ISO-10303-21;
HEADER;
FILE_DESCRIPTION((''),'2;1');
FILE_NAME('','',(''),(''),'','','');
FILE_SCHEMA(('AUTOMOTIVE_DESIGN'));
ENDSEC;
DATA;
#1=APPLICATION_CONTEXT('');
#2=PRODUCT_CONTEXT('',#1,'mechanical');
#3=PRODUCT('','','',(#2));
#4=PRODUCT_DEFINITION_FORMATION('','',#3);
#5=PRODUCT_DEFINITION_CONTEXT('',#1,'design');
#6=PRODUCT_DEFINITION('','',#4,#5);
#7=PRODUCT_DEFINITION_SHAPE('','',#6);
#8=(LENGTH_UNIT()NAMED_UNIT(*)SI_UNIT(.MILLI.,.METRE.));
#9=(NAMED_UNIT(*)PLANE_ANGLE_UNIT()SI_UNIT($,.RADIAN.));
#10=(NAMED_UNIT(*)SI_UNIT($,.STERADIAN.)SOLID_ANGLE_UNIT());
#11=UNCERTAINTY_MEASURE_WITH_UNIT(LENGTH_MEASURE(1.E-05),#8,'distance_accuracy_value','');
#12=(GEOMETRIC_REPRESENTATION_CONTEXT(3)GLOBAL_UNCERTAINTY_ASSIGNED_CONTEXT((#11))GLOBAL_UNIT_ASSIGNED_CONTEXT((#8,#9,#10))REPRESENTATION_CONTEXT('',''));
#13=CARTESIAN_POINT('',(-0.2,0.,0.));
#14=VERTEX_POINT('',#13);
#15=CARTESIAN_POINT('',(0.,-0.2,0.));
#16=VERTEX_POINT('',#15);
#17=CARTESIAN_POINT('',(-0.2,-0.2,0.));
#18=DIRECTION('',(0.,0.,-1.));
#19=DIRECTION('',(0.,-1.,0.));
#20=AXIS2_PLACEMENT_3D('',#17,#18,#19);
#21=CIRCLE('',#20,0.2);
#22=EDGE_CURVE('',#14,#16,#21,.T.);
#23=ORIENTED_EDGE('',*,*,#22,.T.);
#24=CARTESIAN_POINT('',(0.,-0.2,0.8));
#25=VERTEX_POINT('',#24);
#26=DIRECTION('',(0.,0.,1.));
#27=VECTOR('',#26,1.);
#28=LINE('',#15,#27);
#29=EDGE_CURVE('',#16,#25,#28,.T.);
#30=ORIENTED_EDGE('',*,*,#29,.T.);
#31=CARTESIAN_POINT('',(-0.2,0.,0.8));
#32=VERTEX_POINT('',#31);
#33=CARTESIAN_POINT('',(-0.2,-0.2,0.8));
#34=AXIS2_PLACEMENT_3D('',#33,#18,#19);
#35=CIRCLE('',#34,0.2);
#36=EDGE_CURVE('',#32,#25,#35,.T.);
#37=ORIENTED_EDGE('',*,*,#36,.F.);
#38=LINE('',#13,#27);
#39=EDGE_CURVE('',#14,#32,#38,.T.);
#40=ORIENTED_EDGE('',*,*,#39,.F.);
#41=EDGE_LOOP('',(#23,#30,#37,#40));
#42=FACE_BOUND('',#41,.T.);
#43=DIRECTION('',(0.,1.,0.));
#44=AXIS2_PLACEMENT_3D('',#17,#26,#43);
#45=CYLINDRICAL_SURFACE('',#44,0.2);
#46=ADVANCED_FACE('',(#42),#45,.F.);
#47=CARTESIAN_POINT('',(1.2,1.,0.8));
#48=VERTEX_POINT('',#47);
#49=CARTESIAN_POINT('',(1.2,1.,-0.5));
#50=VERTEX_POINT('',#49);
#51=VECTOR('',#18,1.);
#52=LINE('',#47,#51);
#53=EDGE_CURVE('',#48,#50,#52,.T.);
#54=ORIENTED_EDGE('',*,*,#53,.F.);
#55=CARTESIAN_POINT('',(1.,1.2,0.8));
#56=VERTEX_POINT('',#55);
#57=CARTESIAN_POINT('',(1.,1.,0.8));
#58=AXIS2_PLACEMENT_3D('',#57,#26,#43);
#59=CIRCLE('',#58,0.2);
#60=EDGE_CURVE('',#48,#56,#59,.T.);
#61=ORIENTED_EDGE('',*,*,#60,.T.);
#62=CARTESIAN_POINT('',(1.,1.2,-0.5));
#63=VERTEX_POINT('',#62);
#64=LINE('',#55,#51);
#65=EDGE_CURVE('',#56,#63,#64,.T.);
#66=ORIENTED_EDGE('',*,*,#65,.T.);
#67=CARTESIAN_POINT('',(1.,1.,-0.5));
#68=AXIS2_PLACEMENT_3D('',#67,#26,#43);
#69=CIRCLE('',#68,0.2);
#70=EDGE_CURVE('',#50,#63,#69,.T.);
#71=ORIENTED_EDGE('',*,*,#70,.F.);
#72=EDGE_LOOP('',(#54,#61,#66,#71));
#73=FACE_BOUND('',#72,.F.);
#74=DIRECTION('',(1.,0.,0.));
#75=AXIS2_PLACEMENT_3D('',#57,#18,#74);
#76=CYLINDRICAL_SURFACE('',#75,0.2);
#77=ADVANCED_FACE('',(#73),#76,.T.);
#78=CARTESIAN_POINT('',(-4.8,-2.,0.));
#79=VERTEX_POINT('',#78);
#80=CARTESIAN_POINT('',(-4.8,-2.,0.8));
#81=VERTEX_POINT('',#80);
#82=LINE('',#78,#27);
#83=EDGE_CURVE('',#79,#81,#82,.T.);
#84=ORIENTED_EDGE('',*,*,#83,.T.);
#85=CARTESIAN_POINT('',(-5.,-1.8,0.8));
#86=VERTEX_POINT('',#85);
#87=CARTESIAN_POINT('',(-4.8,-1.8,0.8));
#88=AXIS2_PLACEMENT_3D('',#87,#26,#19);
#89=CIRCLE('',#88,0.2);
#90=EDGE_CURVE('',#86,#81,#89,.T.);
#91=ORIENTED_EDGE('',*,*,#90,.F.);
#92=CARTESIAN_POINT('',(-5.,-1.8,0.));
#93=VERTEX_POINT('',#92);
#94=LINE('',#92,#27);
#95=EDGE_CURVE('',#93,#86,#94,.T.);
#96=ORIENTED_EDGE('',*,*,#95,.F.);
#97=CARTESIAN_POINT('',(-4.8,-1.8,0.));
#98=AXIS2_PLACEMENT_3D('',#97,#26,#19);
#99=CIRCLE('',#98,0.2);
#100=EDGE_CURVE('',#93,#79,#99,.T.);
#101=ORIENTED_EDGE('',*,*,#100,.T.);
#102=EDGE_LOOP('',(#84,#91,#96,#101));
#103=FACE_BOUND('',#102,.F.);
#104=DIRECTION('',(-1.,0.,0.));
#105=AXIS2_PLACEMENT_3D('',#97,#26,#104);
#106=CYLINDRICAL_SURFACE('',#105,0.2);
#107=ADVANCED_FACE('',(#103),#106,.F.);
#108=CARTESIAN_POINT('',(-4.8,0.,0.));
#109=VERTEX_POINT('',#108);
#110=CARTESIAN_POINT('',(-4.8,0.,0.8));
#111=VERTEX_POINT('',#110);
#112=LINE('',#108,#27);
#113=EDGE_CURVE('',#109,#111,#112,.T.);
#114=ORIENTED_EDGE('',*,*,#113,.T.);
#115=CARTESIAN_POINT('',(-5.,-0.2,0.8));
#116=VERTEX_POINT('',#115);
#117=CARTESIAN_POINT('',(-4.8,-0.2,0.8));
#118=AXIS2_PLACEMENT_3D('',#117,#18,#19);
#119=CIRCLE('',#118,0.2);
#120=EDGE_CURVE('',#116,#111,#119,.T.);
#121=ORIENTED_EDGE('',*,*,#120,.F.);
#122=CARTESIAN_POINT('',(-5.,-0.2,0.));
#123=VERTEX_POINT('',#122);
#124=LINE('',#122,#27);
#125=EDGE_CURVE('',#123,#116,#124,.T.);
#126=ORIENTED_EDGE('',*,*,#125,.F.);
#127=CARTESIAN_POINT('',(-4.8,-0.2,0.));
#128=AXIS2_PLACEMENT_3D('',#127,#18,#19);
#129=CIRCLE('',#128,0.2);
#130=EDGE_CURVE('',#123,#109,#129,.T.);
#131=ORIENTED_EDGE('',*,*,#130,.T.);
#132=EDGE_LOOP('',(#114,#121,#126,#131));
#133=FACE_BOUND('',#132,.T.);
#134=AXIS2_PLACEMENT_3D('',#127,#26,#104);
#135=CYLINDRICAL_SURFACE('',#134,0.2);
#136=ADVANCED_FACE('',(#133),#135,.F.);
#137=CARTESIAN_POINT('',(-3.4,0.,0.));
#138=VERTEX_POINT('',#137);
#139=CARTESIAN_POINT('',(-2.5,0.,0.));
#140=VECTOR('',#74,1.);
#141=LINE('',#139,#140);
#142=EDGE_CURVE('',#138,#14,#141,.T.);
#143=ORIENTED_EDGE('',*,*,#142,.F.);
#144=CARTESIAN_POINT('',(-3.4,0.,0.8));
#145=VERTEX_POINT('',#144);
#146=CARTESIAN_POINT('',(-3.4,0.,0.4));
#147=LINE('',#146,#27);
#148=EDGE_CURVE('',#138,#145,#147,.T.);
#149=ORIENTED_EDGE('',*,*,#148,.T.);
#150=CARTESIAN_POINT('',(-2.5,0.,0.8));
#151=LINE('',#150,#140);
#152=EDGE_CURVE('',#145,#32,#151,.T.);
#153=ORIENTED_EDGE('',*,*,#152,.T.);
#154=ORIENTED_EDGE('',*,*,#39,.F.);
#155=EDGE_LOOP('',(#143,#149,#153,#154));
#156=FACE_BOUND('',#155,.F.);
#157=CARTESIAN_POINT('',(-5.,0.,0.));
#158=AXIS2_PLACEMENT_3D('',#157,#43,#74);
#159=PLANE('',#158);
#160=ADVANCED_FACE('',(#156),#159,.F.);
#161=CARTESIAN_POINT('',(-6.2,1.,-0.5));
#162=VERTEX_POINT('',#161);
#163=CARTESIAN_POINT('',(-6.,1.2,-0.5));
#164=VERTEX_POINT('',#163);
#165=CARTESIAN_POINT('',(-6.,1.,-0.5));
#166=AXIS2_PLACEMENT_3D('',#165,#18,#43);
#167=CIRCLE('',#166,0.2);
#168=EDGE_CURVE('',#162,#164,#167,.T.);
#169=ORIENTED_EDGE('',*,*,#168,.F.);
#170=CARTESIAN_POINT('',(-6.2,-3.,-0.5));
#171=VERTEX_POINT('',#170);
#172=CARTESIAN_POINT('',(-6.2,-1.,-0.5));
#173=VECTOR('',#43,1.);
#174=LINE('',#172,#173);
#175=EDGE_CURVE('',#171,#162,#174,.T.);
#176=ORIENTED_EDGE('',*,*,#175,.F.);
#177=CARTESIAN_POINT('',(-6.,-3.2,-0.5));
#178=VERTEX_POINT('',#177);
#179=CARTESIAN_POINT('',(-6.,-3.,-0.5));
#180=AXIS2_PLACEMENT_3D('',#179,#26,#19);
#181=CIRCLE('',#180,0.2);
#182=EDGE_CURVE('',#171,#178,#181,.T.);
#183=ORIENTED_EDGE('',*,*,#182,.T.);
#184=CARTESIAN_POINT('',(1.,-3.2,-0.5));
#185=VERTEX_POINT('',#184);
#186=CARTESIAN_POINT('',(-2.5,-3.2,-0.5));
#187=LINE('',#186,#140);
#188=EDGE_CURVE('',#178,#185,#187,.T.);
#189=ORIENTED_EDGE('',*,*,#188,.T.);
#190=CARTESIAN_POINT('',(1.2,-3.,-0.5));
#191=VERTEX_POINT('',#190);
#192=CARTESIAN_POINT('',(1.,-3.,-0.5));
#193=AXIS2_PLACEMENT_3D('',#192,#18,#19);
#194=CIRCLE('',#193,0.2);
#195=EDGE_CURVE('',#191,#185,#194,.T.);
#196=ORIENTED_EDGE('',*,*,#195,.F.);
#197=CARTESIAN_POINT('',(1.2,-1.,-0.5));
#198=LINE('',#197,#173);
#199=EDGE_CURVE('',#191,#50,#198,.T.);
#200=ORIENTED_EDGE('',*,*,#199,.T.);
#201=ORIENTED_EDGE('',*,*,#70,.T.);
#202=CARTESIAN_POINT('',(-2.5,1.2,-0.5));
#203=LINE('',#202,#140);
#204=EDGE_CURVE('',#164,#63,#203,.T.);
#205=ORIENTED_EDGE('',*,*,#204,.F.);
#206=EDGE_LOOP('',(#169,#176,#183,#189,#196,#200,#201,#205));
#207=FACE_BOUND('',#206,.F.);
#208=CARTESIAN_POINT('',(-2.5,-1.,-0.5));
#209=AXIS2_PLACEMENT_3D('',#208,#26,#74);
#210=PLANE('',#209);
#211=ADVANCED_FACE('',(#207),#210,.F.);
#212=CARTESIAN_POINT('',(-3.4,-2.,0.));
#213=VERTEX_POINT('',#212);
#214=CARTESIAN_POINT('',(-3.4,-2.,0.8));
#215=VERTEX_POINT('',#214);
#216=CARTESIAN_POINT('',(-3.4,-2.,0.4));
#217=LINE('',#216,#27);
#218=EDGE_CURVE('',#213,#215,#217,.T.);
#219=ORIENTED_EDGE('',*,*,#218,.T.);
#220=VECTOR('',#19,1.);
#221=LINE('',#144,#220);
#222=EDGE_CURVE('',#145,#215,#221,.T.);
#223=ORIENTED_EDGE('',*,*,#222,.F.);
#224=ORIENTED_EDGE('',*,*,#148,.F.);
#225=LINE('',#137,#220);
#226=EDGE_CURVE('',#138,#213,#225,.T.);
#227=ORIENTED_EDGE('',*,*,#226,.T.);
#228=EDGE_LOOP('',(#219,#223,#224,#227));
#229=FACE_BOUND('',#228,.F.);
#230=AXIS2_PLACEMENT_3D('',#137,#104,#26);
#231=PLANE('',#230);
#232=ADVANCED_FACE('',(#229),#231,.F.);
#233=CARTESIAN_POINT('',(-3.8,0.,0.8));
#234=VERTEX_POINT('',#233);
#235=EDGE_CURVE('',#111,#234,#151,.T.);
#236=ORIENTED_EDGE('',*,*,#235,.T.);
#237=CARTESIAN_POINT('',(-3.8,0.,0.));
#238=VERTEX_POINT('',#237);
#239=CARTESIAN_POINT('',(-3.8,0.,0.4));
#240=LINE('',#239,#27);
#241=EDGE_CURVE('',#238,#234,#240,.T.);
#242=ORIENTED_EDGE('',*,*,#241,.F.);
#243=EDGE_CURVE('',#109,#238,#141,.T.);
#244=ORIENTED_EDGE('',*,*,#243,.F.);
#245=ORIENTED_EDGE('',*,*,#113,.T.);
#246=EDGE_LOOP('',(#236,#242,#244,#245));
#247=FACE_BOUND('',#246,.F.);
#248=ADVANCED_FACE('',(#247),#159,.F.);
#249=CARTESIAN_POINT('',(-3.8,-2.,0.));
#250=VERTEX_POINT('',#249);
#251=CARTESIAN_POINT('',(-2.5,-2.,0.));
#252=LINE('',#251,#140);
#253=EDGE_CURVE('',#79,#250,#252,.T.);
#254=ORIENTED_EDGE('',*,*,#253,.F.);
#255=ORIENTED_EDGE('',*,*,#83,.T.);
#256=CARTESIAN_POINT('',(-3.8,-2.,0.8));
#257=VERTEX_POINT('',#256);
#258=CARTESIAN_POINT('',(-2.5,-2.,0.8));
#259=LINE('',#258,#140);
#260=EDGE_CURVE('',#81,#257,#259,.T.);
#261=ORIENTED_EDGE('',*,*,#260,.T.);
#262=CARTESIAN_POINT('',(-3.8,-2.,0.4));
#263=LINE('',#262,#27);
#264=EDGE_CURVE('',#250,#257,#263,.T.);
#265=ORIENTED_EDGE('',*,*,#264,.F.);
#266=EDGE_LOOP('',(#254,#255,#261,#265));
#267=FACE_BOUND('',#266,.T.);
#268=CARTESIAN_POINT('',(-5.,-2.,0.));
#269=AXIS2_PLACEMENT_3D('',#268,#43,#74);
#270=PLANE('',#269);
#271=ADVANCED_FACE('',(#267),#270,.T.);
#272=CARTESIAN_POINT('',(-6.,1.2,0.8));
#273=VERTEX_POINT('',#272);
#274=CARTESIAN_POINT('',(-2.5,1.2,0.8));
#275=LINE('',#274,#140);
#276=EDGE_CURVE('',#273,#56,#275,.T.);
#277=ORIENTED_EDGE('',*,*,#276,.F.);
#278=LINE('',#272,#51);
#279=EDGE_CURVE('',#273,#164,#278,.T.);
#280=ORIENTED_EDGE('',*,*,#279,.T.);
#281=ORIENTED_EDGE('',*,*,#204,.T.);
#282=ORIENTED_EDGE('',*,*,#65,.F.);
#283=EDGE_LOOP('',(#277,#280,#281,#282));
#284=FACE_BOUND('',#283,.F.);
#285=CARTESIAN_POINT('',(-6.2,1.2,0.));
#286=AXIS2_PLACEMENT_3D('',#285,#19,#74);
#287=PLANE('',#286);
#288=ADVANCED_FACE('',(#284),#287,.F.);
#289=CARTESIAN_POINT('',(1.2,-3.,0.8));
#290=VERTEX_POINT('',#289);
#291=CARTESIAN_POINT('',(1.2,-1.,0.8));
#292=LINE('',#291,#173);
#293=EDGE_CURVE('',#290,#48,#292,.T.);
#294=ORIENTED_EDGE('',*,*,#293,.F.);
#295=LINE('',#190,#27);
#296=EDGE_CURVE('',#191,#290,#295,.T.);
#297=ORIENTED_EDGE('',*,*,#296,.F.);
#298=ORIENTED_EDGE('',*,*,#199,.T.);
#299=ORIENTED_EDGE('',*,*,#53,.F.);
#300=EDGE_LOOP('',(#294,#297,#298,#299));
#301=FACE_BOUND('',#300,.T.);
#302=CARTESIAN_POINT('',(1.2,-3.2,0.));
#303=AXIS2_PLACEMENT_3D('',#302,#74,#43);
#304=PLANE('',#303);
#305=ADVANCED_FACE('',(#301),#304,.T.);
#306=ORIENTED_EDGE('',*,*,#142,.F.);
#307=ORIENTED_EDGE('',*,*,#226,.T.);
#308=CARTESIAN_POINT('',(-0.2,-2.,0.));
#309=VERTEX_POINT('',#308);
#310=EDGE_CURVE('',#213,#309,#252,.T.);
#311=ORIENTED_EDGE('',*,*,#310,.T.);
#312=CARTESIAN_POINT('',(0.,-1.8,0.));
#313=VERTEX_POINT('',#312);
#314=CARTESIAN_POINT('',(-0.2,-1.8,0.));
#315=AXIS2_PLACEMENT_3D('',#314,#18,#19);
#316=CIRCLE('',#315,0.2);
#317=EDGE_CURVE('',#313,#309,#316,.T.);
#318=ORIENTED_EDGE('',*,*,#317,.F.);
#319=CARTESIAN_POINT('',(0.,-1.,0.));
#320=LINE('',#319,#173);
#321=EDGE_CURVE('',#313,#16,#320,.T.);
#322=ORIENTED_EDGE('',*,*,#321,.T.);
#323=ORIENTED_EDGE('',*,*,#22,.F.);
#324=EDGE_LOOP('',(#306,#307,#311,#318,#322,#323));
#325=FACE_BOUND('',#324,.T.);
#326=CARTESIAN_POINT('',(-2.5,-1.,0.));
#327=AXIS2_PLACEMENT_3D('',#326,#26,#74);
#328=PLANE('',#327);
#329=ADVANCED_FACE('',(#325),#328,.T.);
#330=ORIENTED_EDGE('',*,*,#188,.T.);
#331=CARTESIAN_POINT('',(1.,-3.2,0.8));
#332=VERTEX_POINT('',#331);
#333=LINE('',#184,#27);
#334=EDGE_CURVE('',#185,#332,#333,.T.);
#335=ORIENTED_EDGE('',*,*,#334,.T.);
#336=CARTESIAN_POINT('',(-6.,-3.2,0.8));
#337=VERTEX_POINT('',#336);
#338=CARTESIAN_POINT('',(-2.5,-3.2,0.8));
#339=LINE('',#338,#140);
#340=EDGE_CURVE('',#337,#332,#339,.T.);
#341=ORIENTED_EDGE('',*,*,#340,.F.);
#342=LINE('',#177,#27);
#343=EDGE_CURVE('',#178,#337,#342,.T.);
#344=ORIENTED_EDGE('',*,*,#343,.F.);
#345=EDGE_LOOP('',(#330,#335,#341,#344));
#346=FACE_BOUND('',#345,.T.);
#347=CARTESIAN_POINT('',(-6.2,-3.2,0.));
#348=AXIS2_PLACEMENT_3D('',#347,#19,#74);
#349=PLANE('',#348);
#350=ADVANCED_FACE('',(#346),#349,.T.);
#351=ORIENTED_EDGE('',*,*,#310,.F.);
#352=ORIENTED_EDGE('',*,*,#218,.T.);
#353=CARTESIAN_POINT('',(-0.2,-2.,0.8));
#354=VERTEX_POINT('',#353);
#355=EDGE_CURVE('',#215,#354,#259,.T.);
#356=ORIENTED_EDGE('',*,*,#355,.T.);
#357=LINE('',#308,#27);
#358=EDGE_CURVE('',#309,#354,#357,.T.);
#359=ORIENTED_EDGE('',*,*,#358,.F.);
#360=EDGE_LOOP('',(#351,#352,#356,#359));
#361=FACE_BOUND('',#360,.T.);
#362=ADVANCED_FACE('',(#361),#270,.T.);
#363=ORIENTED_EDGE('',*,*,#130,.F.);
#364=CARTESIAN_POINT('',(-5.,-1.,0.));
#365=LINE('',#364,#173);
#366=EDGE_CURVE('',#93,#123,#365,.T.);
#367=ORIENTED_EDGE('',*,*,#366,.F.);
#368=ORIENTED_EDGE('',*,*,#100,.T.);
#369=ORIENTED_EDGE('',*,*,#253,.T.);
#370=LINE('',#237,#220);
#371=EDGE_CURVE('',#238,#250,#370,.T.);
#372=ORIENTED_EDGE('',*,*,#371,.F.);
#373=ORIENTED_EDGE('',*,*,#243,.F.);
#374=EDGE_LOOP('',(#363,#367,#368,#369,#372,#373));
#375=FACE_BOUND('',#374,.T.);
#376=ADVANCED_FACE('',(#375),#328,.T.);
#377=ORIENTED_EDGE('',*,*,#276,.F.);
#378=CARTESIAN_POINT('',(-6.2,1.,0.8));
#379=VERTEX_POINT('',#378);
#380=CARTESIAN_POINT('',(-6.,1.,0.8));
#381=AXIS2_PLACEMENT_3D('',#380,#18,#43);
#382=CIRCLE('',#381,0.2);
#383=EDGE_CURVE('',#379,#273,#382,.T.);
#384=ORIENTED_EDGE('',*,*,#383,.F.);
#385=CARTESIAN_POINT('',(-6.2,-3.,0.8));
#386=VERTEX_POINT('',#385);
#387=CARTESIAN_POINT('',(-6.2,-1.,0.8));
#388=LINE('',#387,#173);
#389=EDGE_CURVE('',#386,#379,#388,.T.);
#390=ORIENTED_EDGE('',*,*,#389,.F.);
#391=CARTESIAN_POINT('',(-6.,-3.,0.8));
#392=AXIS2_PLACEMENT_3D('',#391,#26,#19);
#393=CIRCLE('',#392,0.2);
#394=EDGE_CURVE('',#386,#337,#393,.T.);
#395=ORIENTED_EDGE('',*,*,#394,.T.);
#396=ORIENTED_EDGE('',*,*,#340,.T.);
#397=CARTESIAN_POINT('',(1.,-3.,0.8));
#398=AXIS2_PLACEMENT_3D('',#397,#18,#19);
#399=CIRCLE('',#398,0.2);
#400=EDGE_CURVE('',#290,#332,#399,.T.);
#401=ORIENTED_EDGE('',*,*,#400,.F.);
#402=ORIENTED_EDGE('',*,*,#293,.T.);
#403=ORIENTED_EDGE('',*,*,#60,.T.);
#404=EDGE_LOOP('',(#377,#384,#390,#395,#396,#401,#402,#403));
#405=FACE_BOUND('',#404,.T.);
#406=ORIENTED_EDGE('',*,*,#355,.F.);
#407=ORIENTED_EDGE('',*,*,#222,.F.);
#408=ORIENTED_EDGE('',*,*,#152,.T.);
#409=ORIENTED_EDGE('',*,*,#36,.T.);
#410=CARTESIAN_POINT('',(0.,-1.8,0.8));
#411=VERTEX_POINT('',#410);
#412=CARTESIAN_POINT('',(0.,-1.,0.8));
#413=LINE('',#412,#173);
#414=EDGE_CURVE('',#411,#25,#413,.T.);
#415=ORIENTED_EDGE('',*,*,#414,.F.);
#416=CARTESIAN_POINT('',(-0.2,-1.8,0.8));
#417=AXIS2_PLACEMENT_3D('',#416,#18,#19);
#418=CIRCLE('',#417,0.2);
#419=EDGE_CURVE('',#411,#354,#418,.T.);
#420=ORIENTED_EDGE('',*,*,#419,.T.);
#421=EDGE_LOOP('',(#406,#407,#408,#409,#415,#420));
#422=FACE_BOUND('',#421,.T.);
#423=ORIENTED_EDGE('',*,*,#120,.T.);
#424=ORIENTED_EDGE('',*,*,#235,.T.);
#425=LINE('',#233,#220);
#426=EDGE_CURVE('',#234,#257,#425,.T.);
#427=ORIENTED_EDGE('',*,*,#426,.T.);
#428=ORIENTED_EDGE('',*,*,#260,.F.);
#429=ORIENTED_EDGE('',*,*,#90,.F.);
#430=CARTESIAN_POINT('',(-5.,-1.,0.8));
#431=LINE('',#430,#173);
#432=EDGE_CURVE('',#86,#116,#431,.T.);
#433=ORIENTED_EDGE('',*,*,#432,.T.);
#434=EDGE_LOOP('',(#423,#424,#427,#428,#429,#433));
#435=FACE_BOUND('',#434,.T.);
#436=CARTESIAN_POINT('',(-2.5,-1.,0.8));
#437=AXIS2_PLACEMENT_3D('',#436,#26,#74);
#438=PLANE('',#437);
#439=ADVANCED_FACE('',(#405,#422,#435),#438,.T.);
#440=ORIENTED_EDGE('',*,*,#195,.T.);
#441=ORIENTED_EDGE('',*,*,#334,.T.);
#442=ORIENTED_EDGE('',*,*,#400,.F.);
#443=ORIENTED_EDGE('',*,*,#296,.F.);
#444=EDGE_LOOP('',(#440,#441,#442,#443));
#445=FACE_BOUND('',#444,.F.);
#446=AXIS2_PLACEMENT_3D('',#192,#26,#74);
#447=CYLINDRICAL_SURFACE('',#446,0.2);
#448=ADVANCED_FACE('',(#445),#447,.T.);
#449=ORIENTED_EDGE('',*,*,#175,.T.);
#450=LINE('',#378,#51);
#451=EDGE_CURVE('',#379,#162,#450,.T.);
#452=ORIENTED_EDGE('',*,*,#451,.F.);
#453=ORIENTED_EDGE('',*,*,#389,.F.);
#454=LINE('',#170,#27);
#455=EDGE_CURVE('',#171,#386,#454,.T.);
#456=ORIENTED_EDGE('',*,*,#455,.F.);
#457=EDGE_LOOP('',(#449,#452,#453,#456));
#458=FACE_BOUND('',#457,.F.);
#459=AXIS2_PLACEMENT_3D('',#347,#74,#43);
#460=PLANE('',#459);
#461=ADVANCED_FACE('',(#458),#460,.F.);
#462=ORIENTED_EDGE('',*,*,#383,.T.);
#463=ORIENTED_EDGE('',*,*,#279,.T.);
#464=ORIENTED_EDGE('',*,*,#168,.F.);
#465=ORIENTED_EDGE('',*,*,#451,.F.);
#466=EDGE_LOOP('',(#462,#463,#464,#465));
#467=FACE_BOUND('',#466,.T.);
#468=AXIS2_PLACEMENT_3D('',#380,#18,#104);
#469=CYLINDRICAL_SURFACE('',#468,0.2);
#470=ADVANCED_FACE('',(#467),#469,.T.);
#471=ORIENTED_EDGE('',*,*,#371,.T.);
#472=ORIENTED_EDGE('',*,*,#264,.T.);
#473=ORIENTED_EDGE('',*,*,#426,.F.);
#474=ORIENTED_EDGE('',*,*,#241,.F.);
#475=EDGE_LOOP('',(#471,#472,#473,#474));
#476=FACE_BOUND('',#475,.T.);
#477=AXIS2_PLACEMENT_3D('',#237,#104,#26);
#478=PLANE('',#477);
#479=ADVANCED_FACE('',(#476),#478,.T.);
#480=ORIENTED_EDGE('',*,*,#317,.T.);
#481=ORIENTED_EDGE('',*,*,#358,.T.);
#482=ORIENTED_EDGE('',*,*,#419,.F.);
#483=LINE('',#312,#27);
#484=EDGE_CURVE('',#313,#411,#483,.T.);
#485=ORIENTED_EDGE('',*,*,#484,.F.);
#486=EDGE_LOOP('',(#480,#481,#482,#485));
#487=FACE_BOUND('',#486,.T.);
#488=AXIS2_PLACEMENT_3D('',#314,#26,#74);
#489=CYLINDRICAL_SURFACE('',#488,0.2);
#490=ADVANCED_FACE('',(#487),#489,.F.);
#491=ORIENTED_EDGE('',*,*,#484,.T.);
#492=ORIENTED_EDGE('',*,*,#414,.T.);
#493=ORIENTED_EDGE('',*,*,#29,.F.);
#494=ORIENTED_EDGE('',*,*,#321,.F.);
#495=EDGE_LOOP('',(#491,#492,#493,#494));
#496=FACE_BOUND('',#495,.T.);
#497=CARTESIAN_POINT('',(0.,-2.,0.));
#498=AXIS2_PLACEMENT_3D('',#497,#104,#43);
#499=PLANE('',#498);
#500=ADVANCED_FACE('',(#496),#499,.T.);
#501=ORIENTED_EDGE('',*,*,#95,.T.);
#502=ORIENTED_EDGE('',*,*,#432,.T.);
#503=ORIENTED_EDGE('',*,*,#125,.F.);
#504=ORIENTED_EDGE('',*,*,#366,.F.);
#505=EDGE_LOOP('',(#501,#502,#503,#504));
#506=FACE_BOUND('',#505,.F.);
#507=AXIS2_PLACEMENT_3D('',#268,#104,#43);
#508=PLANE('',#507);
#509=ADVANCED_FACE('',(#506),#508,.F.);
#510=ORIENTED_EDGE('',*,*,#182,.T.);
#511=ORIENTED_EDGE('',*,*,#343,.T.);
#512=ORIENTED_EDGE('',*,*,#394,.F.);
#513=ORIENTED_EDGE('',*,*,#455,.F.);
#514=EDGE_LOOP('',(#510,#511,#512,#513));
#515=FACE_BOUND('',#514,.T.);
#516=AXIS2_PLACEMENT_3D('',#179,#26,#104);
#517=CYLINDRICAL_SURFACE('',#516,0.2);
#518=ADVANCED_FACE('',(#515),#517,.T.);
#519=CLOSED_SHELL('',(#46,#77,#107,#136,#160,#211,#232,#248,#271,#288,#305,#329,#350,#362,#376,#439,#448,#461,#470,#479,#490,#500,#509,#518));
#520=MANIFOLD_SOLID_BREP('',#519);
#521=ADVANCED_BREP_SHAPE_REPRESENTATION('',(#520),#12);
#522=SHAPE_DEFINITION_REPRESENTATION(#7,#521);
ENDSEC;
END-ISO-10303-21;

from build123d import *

# Parameters (mm, degrees)
F0_W     = 7.400000114
F0_H     = 4.400000114
F0_W_2   = 5
F0_H_2   = 2
F1_DEPTH = 0.8
F2_DEPTH = 0.5
F4_R     = 0.2
F5_W     = 0.4
F5_H     = 0.8
F6_DEPTH = 2


# Not quite as in the source:
# - a feature names something its author has since deleted; it is built from what else it names


with BuildPart() as f1:
    # F0 (on Top) → F1 (new body)
    with BuildSketch(Plane.XY):
        with Locations((-2.5, -1)):
            Rectangle(F0_W, F0_H)
        with Locations((-2.5, -1)):
            Rectangle(F0_W_2, F0_H_2, mode=Mode.SUBTRACT)
    extrude(amount=F1_DEPTH)

    # F0 (on Top) → F2 (join)
    with BuildSketch(Plane.XY):
        with Locations((-2.5, -1)):
            Rectangle(F0_W, F0_H)
        with Locations((-2.5, -1)):
            Rectangle(F0_W_2, F0_H_2, mode=Mode.SUBTRACT)
        with Locations((-2.5, -1)):
            Rectangle(F0_W_2, F0_H_2)
    extrude(amount=-F2_DEPTH)

    # F4
    f4_edges = [f1.edges().sort_by_distance(p)[0] for p in [
        (-5, 0, 0.4),
        (0, 0, 0.4),
        (0, -2, 0.4),
        (-5, -2, 0.4),
        (-6.2, 1.2, 0.15),
        (1.2, 1.2, 0.15),
        (1.2, -3.2, 0.15),
        (-6.2, -3.2, 0.15),
    ]]
    fillet(f4_edges, radius=F4_R)

    # F5 (on face) → F6 (join, through all)
    with BuildSketch(Plane.XZ):
        with Locations((-3.6, 0.4)):
            Rectangle(F5_W, F5_H)
    extrude(amount=F6_DEPTH)


solid = f1.part
